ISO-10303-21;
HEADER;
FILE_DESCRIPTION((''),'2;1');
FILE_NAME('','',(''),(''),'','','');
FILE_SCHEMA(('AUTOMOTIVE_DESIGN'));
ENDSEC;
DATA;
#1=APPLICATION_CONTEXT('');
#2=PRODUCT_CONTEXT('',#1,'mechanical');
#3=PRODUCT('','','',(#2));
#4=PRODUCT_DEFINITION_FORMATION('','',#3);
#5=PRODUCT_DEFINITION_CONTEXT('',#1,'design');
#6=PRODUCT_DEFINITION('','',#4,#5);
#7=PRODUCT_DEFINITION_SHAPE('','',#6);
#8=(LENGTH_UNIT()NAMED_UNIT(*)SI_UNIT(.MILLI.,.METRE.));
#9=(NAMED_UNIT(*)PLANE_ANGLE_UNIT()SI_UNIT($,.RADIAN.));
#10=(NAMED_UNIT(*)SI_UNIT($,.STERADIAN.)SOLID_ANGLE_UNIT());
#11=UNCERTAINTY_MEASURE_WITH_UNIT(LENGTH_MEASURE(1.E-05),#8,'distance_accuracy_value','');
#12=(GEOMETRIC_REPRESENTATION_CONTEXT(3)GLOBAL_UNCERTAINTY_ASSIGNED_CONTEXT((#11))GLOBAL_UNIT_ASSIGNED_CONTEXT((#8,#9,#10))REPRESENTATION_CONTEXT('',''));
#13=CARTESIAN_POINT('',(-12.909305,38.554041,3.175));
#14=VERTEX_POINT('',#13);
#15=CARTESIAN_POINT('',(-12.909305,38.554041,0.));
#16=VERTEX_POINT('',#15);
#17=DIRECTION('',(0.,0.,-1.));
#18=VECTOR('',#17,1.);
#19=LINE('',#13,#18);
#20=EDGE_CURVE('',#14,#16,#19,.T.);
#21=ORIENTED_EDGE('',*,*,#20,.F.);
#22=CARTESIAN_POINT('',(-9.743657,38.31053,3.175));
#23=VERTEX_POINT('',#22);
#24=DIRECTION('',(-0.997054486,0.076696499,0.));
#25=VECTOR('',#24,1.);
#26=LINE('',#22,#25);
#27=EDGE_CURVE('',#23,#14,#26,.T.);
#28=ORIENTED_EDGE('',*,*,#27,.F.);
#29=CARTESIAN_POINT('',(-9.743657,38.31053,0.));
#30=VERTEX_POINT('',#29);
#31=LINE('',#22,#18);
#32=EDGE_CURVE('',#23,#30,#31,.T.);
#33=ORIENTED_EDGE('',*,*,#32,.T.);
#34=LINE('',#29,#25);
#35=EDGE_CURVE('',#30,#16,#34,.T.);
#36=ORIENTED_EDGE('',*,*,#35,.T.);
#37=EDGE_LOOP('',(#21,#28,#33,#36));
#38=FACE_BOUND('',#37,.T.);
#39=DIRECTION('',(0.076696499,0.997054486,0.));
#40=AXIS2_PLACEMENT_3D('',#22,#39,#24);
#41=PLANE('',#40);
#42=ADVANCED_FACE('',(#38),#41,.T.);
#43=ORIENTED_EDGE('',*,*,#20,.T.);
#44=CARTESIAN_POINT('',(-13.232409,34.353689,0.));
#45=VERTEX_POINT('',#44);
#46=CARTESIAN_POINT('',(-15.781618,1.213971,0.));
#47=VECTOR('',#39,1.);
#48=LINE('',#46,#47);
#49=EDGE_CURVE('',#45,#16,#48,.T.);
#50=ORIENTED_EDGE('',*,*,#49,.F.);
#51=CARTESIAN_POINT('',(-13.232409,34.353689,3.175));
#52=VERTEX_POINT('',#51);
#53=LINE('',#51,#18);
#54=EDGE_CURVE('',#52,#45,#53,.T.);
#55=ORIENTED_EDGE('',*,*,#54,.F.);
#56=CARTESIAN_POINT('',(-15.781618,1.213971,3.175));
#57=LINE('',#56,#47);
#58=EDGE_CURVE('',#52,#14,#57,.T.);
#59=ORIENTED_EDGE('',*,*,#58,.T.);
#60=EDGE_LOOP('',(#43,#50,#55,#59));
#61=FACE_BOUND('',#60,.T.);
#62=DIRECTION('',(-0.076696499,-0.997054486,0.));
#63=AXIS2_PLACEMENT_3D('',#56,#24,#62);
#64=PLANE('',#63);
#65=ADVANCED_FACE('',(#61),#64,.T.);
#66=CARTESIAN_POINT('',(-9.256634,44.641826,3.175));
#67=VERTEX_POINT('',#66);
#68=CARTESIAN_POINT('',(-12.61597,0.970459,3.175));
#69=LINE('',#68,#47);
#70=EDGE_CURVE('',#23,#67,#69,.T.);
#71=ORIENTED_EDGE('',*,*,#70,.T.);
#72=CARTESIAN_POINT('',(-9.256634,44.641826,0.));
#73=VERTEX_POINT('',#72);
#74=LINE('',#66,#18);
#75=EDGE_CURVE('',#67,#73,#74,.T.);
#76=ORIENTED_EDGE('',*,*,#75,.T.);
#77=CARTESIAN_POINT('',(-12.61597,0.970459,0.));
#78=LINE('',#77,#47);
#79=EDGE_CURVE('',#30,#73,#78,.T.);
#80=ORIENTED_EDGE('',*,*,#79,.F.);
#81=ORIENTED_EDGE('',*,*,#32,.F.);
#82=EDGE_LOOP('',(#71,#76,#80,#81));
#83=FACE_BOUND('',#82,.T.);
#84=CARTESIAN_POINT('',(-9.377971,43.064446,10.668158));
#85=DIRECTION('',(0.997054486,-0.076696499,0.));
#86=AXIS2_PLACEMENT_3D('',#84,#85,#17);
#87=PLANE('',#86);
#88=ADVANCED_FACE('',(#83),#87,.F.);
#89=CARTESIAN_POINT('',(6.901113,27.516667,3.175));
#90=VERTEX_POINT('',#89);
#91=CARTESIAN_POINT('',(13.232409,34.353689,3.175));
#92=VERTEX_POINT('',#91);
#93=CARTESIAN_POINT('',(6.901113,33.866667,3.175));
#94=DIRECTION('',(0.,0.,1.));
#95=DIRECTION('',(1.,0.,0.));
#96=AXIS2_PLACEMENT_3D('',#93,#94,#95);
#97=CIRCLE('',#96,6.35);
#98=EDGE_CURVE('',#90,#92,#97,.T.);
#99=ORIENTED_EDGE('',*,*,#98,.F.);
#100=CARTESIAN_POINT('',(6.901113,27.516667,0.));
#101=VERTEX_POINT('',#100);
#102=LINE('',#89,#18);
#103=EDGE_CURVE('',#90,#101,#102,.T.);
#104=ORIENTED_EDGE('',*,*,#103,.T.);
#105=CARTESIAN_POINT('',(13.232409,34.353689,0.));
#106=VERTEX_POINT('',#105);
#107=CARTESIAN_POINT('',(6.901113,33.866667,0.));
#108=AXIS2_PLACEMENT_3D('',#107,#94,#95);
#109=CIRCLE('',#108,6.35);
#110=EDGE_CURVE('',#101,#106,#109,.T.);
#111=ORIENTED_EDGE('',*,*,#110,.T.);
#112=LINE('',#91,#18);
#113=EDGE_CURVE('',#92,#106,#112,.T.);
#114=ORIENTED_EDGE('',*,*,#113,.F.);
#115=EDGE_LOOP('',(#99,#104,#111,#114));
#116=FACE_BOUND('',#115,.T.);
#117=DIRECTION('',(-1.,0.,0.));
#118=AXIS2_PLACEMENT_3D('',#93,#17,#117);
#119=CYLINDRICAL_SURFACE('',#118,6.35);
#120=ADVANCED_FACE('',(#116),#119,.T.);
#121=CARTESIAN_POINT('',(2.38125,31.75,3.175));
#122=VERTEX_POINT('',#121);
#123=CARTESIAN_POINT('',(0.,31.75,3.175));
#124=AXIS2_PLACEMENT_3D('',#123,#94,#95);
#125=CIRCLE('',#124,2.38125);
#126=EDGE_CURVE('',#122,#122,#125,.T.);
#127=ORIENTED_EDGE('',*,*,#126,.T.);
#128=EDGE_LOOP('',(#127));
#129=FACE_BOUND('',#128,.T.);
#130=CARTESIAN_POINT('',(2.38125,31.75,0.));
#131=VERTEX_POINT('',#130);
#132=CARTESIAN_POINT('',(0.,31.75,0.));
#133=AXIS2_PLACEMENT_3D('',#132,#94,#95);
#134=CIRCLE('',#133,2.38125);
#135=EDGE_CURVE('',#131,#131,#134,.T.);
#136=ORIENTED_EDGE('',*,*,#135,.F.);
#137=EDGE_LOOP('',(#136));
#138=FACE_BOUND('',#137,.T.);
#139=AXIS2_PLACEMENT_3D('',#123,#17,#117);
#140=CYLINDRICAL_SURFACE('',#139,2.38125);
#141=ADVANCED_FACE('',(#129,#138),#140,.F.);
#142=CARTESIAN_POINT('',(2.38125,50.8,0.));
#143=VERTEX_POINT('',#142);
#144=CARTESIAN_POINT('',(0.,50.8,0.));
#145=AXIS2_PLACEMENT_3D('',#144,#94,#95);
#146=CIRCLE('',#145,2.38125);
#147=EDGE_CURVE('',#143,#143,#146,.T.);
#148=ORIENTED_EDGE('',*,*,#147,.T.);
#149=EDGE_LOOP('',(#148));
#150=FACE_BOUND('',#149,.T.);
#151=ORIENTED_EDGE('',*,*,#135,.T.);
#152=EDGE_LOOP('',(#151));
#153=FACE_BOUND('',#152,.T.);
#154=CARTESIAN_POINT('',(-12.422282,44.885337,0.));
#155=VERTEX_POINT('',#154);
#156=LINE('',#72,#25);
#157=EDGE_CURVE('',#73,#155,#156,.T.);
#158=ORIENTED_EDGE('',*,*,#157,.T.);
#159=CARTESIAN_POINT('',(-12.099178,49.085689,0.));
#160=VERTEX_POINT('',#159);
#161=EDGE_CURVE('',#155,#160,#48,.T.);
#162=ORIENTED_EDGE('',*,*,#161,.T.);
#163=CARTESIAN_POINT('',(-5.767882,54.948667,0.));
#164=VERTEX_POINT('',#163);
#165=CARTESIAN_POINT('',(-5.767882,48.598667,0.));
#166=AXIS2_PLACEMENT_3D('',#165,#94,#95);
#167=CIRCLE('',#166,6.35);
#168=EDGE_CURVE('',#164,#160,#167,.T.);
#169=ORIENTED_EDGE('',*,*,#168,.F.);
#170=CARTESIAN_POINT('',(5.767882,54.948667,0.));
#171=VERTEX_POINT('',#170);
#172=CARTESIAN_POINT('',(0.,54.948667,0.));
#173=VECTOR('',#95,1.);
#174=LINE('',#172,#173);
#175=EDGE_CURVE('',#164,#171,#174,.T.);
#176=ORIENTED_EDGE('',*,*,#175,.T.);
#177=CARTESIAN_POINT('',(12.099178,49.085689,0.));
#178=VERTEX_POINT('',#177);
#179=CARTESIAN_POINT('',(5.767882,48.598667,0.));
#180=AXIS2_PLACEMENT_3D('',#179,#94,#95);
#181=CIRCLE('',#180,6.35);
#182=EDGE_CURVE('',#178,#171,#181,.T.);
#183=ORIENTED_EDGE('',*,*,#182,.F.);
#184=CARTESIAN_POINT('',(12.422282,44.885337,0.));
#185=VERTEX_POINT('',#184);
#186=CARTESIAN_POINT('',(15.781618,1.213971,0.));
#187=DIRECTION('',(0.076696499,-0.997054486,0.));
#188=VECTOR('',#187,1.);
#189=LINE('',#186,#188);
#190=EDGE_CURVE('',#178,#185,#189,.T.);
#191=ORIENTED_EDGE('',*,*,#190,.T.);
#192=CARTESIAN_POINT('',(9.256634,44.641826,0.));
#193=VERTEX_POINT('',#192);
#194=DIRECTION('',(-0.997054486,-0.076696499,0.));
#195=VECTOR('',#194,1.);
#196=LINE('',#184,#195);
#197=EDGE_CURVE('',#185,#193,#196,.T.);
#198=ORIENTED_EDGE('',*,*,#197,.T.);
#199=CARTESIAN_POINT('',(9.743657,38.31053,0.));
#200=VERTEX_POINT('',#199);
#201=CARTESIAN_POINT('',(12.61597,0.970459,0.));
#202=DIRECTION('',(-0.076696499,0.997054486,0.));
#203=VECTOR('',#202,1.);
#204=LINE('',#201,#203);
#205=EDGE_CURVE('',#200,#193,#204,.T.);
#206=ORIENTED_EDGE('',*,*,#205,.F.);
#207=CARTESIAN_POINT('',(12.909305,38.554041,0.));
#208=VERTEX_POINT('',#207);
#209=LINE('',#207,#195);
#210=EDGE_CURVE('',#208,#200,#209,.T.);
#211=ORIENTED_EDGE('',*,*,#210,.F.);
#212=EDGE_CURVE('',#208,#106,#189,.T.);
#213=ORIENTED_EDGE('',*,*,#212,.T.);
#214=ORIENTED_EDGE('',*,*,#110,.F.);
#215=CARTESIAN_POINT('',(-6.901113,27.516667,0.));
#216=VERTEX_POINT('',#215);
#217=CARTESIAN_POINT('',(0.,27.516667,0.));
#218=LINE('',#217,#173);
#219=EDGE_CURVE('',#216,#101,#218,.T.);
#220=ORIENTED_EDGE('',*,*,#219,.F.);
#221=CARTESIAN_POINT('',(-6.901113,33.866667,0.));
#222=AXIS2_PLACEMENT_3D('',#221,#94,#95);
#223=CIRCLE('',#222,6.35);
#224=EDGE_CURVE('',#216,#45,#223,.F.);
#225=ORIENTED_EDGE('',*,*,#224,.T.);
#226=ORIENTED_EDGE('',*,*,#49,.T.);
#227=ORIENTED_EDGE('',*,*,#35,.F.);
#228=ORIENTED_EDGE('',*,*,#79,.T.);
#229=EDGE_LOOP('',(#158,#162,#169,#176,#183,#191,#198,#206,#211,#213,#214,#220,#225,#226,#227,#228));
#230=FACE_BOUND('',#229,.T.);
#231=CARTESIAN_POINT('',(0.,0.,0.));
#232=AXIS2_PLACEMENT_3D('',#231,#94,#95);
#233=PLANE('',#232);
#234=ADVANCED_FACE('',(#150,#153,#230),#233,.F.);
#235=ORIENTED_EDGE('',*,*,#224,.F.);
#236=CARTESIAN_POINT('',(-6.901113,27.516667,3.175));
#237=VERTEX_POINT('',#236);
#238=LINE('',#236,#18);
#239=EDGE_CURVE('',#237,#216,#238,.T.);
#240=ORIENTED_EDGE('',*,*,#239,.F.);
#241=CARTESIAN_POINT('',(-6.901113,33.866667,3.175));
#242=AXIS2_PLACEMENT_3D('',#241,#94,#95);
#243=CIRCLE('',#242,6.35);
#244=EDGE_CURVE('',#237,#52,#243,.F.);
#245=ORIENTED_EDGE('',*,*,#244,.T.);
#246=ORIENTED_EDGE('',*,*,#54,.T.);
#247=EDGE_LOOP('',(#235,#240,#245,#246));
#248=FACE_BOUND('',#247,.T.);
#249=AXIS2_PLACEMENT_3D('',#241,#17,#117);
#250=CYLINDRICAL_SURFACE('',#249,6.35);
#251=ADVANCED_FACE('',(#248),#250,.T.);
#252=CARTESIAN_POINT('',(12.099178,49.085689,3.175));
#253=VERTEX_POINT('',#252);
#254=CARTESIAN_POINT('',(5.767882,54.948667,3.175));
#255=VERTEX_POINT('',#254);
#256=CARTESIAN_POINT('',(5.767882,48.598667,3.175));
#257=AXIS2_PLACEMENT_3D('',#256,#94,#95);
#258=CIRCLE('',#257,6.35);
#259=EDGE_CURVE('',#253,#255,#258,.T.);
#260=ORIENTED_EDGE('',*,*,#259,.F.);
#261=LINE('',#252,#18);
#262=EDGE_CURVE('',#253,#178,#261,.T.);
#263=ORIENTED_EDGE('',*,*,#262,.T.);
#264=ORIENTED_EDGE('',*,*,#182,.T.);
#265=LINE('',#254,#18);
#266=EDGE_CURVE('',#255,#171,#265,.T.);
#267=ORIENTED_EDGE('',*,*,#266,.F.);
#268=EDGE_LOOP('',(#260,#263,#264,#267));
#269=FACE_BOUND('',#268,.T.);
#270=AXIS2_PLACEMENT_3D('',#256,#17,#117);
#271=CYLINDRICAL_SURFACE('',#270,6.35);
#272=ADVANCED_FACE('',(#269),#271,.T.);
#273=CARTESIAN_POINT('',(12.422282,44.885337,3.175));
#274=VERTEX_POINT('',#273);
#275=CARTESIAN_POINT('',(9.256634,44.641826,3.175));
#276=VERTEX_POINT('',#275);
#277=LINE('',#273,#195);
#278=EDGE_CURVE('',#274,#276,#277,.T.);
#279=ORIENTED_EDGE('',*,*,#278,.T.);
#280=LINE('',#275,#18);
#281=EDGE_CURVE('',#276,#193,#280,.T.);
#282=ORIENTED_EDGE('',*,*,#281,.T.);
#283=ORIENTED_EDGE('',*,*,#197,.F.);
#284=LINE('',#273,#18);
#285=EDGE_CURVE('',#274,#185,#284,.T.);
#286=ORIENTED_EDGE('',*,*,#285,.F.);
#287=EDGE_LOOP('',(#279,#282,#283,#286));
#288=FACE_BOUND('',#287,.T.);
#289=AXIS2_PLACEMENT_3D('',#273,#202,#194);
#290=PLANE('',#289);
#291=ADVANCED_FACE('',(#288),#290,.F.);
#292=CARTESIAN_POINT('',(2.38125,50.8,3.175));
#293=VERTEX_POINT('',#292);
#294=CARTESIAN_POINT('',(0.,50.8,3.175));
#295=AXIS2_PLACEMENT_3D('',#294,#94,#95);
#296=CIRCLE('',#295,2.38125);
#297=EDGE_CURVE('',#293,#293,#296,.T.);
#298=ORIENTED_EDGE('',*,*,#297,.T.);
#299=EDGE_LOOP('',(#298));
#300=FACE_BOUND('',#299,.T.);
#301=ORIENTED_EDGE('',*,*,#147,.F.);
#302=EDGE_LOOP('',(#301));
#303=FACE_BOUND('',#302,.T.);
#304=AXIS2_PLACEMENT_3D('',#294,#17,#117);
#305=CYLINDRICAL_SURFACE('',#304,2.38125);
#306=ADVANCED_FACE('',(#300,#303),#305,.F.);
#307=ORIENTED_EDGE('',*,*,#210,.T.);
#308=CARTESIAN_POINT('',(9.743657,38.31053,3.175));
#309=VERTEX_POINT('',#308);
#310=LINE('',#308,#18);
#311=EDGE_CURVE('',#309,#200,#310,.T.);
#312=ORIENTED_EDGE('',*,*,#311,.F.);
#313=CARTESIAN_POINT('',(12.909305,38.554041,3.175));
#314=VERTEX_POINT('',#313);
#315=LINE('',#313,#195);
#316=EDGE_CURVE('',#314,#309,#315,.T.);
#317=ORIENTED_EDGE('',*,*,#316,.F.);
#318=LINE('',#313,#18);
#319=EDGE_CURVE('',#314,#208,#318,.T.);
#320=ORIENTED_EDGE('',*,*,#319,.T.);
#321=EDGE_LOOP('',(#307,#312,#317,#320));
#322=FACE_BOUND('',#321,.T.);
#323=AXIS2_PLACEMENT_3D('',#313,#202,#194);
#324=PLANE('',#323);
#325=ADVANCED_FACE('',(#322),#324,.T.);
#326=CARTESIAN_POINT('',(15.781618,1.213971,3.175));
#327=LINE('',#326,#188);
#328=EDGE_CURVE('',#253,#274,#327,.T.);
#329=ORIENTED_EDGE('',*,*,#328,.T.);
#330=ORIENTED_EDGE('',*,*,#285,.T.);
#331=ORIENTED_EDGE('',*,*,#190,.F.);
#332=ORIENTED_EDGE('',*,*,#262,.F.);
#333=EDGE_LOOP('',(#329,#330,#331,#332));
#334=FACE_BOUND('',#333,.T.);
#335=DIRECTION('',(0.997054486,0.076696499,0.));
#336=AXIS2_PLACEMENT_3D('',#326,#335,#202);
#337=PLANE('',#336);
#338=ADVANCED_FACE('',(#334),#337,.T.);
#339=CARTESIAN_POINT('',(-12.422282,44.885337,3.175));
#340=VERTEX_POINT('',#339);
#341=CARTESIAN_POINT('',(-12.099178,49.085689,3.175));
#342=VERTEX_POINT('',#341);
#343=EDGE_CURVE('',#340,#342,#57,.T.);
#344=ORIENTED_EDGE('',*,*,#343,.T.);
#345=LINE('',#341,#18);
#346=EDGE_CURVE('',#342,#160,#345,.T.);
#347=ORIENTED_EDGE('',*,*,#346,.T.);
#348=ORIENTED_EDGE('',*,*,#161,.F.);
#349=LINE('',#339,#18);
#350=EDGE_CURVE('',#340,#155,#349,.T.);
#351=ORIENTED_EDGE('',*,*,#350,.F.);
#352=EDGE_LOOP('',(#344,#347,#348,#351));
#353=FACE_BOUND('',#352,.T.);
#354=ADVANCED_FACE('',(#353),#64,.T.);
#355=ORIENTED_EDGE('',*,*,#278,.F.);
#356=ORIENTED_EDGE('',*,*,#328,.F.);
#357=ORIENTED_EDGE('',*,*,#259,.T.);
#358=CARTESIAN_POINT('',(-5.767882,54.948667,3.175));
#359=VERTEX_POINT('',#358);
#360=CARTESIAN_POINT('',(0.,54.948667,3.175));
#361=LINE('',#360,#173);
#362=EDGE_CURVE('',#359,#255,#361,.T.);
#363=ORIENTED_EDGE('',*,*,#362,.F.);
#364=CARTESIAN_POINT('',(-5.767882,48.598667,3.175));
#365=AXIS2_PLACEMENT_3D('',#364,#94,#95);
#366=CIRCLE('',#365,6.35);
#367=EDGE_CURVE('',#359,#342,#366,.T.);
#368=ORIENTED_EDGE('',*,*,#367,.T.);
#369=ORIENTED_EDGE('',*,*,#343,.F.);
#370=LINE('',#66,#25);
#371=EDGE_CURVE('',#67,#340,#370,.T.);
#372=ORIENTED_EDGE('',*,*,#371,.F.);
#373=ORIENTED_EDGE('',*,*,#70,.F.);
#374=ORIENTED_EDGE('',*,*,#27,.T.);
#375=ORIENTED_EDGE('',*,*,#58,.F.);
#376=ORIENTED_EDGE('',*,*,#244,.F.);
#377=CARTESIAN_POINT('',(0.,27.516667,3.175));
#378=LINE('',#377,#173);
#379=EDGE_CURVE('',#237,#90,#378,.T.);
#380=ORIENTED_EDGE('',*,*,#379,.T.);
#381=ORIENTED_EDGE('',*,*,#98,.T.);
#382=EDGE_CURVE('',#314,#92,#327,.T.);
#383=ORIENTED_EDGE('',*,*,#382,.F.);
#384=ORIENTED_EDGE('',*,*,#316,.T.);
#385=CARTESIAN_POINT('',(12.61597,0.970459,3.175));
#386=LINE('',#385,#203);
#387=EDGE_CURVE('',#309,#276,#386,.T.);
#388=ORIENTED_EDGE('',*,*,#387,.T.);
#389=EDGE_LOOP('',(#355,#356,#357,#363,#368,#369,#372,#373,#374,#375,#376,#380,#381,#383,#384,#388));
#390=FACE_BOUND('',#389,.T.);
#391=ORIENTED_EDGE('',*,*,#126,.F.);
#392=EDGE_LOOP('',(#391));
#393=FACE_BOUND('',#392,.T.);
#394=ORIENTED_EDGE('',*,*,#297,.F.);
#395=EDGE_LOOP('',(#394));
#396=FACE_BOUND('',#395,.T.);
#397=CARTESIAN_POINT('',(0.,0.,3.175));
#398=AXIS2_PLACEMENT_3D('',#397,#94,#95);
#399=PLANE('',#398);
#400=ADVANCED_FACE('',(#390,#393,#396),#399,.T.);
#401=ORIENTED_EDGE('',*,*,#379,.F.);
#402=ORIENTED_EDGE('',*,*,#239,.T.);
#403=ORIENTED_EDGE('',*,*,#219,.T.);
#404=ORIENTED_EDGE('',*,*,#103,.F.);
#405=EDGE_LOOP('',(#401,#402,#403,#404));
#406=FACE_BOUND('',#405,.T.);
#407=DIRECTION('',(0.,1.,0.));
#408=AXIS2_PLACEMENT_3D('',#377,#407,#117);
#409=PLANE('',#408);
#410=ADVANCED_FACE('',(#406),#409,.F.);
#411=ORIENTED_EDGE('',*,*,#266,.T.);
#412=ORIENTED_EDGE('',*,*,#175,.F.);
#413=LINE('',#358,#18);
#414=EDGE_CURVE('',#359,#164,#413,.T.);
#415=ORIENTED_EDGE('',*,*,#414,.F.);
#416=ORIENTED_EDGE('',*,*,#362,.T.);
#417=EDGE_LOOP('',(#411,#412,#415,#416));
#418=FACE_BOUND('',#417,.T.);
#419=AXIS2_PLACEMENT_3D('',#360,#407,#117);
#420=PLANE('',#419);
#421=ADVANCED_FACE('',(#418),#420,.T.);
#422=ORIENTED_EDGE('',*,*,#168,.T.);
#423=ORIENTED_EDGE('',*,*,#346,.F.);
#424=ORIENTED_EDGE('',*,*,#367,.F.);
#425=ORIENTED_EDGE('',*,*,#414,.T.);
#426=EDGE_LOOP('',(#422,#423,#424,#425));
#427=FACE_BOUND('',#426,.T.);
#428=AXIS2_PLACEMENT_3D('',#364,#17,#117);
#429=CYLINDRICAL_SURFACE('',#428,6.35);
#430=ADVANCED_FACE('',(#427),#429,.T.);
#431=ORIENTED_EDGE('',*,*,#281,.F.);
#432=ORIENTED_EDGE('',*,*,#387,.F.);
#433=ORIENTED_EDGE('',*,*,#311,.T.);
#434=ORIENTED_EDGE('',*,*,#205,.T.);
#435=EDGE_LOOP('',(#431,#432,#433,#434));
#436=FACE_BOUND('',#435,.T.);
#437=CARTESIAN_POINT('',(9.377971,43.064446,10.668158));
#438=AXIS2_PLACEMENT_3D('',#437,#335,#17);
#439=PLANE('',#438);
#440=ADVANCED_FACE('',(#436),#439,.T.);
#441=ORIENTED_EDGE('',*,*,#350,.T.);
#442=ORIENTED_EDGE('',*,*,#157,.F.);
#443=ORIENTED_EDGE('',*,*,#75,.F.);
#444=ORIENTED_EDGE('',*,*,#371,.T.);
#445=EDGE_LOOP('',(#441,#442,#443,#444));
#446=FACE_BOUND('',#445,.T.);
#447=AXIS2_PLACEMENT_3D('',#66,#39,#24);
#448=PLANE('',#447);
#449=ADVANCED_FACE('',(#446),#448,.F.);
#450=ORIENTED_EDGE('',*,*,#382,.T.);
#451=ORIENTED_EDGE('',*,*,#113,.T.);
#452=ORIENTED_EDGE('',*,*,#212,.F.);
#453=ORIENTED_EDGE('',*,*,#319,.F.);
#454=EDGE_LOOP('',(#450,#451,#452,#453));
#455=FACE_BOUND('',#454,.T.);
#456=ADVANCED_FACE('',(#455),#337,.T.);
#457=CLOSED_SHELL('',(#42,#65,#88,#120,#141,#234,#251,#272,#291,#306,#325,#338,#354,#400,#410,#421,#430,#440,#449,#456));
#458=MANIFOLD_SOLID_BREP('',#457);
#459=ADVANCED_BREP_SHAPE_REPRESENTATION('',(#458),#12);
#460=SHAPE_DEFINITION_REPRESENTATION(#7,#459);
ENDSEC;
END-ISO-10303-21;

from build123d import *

# Parameters (mm, degrees)
BOSS_EXTRUDE1_DEPTH = 3.175
CAVITY1_DEPTH       = 3.175


# Read off the part's stored shape, not the designer's step: Cavity1
with BuildPart() as part:
    # Sketch1 → Boss-Extrude1 (new body)
    with BuildSketch(Plane.XY):
        with BuildLine():
            Line((-6.901112522, 27.516666667), (0, 27.516666667))
            Line((0, 27.516666667), (0, 29.368749958))
            ThreePointArc((0, 29.368749958), (-2.38125, 31.749999958), (0, 34.131249958))
            Line((0, 34.131249958), (0, 48.418749958))
            ThreePointArc((0, 48.418749958), (-2.38125, 50.799999958), (0, 53.181249958))
            Line((0, 53.181249958), (0, 54.948666667))
            Line((0, 54.948666667), (-5.767881753, 54.948666667))
            ThreePointArc((-5.767881753, 54.948666667), (-10.082386674, 53.257802562), (-12.099177736, 49.085689435))
            Line((-12.099177736, 49.085689435), (-13.232408505, 34.353689435))
            ThreePointArc((-13.232408505, 34.353689435), (-11.560248417, 29.552161746), (-6.901112522, 27.516666667))
        make_face()
        with BuildLine():
            Line((0, 29.368749958), (0, 27.516666667))
            Line((0, 27.516666667), (6.901112522, 27.516666667))
            ThreePointArc((6.901112522, 27.516666667), (11.560248417, 29.552161746), (13.232408505, 34.353689435))
            Line((13.232408505, 34.353689435), (12.099177736, 49.085689435))
            ThreePointArc((12.099177736, 49.085689435), (10.082386674, 53.257802562), (5.767881753, 54.948666667))
            Line((5.767881753, 54.948666667), (0, 54.948666667))
            Line((0, 54.948666667), (0, 53.181249958))
            ThreePointArc((0, 53.181249958), (1.683798023, 52.48379798), (2.38125, 50.799999958))
            ThreePointArc((2.38125, 50.799999958), (1.683798023, 49.116201935), (0, 48.418749958))
            Line((0, 48.418749958), (0, 34.131249958))
            ThreePointArc((0, 34.131249958), (1.683798023, 33.43379798), (2.38125, 31.749999958))
            ThreePointArc((2.38125, 31.749999958), (1.683798023, 30.066201935), (0, 29.368749958))
        make_face()
    extrude(amount=BOSS_EXTRUDE1_DEPTH)

    # Cavity1 outline → Cavity1 (cut)
    with BuildSketch(Plane.XY):
        Polygon((9.256633745, 44.641826042), (9.743656513, 38.310530059), (12.909304504, 38.554041443), (12.422281737, 44.885337426), align=None)
        Polygon((-12.909304504, 38.554041443), (-9.743656513, 38.310530059), (-9.256633745, 44.641826042), (-12.422281736, 44.885337426), align=None)
    extrude(amount=CAVITY1_DEPTH, mode=Mode.SUBTRACT)


solid = part.part
